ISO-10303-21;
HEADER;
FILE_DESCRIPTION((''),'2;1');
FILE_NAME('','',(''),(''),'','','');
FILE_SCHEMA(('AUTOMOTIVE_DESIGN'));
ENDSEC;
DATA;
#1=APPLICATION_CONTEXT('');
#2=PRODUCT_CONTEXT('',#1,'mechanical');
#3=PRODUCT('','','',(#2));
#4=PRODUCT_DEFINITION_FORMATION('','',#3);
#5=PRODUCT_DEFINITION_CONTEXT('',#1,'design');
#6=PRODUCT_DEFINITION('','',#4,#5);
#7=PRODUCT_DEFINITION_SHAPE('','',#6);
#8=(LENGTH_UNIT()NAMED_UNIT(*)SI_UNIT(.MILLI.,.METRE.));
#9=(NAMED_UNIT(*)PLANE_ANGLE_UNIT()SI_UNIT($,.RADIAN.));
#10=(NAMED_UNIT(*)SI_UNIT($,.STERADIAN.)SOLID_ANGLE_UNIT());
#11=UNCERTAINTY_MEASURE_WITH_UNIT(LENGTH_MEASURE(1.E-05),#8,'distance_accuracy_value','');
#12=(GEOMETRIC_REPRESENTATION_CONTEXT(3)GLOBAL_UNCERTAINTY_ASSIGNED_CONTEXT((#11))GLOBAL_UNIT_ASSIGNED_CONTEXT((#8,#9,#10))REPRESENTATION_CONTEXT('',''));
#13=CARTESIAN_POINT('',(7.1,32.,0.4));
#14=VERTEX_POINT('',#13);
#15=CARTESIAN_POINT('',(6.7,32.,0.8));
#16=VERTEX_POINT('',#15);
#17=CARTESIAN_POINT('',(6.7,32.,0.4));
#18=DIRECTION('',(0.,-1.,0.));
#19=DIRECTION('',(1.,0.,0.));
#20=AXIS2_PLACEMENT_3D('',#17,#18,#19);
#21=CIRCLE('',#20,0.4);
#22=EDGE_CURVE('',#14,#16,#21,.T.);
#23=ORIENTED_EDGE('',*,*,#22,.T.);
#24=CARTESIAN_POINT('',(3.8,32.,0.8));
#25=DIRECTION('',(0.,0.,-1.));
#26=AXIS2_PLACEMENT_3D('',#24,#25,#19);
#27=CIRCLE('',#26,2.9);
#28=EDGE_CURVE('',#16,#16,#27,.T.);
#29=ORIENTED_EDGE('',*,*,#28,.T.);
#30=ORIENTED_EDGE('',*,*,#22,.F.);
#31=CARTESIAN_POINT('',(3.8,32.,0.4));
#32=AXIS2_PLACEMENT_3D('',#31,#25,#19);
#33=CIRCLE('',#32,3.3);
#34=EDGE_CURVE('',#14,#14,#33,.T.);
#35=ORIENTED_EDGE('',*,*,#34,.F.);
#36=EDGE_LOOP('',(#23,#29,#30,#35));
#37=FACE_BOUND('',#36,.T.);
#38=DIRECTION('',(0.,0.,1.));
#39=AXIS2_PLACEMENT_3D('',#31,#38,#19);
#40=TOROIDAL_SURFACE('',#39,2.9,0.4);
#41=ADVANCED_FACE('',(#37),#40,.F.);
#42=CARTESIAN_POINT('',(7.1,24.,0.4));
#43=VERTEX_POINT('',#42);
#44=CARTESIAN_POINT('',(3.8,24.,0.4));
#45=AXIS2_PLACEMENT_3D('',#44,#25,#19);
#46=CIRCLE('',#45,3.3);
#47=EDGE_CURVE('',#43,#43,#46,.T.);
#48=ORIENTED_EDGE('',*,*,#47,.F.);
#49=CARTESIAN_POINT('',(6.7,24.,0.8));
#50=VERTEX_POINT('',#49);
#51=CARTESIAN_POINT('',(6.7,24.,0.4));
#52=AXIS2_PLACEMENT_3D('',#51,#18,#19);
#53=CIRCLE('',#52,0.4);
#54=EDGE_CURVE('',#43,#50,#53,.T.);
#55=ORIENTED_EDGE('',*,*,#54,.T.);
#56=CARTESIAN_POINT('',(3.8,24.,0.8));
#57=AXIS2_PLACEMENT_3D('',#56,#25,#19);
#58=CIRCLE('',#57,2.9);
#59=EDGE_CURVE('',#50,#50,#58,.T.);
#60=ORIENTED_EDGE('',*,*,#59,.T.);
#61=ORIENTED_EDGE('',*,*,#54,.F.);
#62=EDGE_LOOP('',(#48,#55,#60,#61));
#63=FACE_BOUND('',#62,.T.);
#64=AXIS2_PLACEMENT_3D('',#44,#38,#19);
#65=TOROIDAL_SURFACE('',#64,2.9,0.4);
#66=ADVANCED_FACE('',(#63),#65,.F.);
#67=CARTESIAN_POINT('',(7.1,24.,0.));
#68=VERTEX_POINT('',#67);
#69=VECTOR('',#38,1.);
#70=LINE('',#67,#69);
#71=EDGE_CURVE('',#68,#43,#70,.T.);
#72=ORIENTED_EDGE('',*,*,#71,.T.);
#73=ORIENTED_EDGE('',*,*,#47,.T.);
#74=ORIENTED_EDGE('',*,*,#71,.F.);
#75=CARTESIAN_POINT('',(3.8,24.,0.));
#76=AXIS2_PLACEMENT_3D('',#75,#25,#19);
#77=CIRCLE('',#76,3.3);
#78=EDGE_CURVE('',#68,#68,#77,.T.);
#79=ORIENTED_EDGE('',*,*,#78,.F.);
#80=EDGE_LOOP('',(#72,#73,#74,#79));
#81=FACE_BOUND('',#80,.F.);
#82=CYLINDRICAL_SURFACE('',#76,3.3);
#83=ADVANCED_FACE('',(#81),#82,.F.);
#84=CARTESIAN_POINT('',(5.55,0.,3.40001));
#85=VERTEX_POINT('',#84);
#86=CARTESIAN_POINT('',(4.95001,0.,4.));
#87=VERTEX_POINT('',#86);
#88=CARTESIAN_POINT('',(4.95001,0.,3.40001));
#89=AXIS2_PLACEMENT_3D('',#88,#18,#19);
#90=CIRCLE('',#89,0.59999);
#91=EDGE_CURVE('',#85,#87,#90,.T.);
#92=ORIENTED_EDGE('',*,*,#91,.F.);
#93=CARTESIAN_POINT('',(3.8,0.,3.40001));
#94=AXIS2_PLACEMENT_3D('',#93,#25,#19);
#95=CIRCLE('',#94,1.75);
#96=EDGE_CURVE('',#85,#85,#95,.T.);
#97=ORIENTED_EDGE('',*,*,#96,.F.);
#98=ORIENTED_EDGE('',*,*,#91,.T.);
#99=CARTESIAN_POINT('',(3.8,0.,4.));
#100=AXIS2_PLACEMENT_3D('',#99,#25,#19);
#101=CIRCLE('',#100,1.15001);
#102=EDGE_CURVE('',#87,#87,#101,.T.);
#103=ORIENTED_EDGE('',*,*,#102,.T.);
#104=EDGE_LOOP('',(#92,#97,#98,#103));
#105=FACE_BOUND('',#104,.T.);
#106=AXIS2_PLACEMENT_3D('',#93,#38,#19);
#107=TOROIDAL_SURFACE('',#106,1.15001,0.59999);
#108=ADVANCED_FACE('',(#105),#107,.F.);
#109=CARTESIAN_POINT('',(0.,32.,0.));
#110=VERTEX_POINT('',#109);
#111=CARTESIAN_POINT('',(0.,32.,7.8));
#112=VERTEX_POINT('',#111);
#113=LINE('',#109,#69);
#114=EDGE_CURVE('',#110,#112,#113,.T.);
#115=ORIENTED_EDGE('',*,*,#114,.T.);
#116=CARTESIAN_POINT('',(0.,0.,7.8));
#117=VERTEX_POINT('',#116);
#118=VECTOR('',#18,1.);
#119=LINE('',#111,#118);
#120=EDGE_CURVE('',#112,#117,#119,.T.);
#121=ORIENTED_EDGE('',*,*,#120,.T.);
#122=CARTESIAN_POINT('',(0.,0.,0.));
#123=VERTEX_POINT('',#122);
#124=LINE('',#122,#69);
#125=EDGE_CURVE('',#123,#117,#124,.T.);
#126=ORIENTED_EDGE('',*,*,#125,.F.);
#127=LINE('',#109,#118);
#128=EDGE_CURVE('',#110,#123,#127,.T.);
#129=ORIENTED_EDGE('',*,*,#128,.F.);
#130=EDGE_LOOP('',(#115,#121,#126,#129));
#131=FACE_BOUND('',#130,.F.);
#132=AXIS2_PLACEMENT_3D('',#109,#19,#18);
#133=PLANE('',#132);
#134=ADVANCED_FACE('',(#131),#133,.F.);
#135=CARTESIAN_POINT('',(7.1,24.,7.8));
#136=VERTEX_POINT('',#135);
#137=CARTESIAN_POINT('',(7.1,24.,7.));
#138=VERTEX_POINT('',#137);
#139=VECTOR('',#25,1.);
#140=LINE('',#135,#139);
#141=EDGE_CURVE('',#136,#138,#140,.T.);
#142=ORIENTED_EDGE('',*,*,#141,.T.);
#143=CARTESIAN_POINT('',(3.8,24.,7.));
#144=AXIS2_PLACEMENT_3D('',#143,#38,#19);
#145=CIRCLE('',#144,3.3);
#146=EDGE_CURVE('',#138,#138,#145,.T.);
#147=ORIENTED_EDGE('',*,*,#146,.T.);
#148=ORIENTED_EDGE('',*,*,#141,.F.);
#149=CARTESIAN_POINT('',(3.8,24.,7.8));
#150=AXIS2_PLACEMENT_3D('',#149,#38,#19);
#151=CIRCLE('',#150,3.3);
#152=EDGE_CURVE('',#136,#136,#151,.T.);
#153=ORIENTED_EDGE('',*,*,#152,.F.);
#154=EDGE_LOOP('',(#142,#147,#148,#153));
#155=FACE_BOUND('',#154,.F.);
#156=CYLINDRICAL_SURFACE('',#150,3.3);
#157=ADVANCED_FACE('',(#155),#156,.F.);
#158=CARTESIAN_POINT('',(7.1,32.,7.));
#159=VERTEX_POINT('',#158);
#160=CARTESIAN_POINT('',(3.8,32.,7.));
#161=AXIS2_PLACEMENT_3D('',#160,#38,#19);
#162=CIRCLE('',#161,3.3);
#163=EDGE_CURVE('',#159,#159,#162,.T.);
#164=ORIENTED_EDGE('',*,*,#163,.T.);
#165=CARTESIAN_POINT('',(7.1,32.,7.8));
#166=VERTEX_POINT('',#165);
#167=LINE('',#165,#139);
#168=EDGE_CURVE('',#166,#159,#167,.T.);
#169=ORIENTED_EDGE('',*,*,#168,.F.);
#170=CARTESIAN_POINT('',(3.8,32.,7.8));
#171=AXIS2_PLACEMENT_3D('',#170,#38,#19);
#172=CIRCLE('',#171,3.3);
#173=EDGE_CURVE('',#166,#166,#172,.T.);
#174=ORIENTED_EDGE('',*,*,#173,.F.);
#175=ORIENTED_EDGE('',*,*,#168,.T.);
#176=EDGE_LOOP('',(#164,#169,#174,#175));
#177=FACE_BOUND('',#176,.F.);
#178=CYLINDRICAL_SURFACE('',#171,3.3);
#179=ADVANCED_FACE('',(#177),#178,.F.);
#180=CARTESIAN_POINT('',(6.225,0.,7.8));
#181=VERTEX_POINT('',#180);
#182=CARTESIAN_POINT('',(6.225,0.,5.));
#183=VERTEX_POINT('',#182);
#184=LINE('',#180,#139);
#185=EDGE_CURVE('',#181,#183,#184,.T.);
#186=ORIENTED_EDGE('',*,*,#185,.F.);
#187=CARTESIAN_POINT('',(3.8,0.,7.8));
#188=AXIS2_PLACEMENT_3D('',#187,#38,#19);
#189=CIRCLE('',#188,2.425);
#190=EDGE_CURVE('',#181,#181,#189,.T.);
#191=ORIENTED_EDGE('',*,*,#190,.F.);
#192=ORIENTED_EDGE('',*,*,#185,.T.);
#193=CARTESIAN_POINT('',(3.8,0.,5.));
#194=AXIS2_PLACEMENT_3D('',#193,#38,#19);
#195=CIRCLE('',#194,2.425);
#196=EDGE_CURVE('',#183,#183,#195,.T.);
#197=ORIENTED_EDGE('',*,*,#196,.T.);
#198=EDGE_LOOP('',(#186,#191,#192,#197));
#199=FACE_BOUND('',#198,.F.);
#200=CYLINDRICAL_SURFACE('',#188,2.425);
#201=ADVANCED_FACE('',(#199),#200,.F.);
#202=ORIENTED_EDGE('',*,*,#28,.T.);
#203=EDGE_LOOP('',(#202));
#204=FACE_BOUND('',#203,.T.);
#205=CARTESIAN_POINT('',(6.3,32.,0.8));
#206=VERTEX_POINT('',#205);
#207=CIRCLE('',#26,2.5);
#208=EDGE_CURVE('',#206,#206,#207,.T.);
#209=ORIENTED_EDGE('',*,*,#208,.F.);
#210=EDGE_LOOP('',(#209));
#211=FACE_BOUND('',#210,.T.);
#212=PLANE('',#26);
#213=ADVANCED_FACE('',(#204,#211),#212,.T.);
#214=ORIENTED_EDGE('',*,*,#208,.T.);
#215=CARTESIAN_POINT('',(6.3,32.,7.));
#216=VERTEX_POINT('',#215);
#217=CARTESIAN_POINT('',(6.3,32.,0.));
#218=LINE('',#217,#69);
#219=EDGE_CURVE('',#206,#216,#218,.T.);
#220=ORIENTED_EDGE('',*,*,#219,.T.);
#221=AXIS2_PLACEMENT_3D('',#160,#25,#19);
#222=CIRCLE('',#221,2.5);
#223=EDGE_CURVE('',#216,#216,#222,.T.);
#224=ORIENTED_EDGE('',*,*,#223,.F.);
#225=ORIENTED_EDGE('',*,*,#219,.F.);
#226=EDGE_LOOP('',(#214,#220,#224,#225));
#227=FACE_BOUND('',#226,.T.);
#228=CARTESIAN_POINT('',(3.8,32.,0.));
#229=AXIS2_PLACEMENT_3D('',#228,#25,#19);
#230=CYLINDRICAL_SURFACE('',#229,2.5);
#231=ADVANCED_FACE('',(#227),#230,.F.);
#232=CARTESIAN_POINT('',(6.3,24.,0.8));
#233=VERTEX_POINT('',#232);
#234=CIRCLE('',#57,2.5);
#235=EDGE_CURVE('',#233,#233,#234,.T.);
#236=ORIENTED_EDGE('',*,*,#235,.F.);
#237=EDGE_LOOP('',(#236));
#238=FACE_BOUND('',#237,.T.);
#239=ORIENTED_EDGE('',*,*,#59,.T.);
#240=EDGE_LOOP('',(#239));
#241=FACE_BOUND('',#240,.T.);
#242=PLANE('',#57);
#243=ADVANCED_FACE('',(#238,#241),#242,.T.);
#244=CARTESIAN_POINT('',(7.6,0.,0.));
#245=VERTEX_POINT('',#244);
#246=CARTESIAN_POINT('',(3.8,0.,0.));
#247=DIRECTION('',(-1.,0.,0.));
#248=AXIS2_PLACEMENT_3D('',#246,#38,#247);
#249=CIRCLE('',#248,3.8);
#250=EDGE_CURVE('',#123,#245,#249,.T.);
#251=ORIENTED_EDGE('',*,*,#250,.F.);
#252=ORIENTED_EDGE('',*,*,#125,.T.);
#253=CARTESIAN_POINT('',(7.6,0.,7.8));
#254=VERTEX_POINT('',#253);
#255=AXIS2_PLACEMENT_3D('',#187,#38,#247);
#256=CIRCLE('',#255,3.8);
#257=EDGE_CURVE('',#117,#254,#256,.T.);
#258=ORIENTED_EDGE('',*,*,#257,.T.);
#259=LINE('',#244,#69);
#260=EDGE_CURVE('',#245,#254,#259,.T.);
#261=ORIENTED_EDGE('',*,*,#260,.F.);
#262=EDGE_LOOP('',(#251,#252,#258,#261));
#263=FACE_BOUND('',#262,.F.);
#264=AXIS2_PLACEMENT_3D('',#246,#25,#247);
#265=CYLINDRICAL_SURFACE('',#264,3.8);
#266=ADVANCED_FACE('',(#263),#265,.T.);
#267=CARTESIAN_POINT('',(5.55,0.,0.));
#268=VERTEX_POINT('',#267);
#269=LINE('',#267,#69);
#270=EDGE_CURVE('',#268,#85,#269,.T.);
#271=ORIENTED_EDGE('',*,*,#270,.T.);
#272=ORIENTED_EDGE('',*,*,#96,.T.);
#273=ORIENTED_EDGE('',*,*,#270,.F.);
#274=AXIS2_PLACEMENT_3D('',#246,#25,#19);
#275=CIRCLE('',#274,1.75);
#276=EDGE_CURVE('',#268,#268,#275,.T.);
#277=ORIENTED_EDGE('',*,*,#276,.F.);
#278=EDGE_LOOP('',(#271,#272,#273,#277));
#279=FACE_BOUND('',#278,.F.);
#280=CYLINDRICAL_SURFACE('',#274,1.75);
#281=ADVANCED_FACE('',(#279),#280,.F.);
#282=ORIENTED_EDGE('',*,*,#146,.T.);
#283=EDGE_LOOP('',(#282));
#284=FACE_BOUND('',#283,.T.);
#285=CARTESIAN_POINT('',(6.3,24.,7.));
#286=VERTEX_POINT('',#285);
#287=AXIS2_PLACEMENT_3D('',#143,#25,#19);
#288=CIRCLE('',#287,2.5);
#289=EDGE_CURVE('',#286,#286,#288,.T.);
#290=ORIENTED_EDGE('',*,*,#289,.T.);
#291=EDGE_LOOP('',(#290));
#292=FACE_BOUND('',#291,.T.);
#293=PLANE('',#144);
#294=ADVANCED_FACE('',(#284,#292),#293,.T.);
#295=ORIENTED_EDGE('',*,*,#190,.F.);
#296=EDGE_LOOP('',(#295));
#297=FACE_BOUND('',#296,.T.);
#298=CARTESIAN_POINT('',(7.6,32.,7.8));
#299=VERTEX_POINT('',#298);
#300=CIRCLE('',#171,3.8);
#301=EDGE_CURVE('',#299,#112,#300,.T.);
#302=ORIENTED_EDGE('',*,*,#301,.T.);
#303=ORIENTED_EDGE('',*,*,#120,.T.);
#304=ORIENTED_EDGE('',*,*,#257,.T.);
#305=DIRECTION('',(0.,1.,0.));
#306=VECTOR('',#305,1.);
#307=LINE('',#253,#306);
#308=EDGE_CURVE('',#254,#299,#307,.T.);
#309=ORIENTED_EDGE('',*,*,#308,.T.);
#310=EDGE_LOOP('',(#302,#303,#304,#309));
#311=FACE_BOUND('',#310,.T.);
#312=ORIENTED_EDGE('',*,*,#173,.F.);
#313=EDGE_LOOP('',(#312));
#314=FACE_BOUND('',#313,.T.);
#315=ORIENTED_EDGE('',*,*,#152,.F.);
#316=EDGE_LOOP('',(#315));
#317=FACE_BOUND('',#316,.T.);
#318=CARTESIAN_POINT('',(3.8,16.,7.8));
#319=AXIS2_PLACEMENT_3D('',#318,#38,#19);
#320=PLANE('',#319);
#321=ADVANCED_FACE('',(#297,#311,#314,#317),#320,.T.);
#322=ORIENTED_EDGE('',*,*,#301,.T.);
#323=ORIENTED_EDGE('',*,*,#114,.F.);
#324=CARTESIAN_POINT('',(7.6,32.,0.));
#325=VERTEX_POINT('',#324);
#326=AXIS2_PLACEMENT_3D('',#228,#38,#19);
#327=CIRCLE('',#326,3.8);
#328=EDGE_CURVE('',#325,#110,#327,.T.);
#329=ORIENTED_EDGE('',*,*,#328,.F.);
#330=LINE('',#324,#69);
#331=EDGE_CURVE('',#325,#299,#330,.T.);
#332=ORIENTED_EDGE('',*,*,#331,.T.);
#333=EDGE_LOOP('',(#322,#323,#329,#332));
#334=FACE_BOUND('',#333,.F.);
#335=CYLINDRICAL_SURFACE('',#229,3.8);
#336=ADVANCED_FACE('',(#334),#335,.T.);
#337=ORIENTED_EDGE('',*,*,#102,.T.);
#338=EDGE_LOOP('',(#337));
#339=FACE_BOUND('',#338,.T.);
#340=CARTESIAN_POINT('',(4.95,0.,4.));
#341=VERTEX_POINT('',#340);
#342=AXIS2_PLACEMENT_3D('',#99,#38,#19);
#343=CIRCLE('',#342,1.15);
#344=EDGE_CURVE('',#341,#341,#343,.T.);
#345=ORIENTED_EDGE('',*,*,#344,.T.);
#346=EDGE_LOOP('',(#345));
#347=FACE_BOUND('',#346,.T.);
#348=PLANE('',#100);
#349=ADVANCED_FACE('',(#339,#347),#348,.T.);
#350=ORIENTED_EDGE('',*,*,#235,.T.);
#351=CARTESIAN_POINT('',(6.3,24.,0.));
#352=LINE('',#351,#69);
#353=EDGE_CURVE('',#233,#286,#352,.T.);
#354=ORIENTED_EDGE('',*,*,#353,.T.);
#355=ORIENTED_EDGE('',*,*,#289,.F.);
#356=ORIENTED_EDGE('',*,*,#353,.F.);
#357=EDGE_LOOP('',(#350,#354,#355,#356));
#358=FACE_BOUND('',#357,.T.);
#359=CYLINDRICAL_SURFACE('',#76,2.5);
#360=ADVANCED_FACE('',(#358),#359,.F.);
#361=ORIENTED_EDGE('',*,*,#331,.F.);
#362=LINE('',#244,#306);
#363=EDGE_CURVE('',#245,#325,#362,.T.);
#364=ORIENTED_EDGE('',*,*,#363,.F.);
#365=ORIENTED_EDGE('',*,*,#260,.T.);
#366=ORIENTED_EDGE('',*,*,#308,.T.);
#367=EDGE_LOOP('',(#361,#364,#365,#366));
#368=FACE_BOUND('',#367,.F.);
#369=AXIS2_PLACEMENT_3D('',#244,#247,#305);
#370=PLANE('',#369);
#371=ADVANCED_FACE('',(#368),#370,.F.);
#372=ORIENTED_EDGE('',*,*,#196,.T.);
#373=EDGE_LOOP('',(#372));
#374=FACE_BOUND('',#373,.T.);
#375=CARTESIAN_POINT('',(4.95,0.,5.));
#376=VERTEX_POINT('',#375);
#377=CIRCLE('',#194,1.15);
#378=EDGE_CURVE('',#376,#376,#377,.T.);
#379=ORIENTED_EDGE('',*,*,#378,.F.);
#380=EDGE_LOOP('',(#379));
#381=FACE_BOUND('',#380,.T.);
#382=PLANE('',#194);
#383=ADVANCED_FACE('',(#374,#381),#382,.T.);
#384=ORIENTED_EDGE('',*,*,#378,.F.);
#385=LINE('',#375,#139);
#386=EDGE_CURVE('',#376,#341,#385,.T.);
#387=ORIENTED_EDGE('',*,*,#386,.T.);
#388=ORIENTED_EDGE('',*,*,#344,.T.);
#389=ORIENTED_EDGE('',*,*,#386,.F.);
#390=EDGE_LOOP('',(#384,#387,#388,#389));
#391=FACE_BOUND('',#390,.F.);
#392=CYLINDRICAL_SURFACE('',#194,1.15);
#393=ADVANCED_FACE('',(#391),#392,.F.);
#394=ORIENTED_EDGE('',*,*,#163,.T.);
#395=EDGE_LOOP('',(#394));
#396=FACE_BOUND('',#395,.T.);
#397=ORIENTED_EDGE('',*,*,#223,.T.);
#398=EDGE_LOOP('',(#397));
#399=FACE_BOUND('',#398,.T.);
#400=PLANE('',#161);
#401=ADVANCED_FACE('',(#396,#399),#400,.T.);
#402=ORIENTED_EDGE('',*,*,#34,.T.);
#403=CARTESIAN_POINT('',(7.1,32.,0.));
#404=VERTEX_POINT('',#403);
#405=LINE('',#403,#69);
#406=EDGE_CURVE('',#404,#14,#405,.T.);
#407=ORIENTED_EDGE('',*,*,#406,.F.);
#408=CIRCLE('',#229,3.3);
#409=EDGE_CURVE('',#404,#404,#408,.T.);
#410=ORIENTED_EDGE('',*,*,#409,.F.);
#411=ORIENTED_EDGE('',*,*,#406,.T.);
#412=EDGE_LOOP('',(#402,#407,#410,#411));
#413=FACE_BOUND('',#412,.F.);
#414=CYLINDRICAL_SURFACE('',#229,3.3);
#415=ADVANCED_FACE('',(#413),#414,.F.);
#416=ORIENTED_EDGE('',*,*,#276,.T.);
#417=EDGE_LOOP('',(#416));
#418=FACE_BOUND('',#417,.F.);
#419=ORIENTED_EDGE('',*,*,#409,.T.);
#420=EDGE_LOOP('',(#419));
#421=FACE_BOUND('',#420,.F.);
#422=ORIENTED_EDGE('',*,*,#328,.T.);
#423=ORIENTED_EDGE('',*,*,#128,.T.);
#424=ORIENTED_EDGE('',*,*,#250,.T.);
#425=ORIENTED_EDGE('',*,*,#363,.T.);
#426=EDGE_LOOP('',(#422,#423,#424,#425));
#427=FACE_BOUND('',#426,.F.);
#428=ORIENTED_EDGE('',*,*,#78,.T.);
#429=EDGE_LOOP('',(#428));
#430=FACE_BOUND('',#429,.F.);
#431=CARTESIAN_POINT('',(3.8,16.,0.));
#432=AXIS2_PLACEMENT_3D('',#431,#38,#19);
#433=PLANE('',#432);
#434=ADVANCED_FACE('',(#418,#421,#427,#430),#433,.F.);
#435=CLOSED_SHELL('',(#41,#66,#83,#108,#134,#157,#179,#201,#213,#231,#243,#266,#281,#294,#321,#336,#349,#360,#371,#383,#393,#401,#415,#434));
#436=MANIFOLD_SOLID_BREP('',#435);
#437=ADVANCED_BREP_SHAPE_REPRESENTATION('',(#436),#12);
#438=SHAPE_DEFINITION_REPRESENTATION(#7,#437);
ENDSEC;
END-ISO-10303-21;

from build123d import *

# Parameters (mm, degrees)
F0_R      = 2.5
F1_DEPTH  = 7.8
F2_R      = 3.3
F3_DEPTH  = 0.8
F4_R      = 3.3
F5_DEPTH  = 0.8
F6_R      = 2.425
F7_DEPTH  = 2.8
F8_R      = 1.75
F9_DEPTH  = 4
F10_R     = 1.15
F11_DEPTH = 5.001
F12_R     = 0.59999
F13_R     = 0.4


# Not quite as in the source:
# - a fillet or chamfer is up to 0.001 mm smaller than in the source, because OpenCascade refuses the exact size


with BuildPart() as f1:
    # F0 (on Top) → F1 (new body)
    with BuildSketch(Plane.XY):
        with BuildLine():
            Line((0, 32), (0, 0))
            ThreePointArc((0, 0), (3.8, -3.8), (7.6, 0))
            Line((7.6, 0), (7.6, 32))
            ThreePointArc((7.6, 32), (3.8, 35.8), (0, 32))
        make_face()
        with Locations((3.8, 24)):
            Circle(F0_R, mode=Mode.SUBTRACT)
        with Locations((3.8, 32)):
            Circle(F0_R, mode=Mode.SUBTRACT)
    extrude(amount=F1_DEPTH)

    # F2 (on face) → F3 (cut)
    with BuildSketch(Plane.XY.offset(7.8)):
        with Locations((3.8, 32)):
            Circle(F2_R)
        with Locations((3.8, 24)):
            Circle(F2_R)
    extrude(amount=-F3_DEPTH, mode=Mode.SUBTRACT)

    # F4 (on face) → F5 (cut)
    with BuildSketch(Plane(origin=(0, 0, 0), x_dir=(1, 0, 0), z_dir=(0, 0, -1))):
        with Locations((3.8, -24)):
            Circle(F4_R)
        with Locations((3.8, -32)):
            Circle(F4_R)
    extrude(amount=-F5_DEPTH, mode=Mode.SUBTRACT)

    # F6 (on face) → F7 (cut)
    with BuildSketch(Plane.XY.offset(7.8)):
        with Locations((3.8, 0)):
            Circle(F6_R)
    extrude(amount=-F7_DEPTH, mode=Mode.SUBTRACT)

    # F8 (on face) → F9 (cut)
    with BuildSketch(Plane(origin=(0, 0, 0), x_dir=(1, 0, 0), z_dir=(0, 0, -1))):
        with Locations((3.8, 0)):
            Circle(F8_R)
    extrude(amount=-F9_DEPTH, mode=Mode.SUBTRACT)

    # F10 (on face) → F11 (cut, through all)
    with BuildSketch(Plane.XY.offset(5)):
        with Locations((3.8, 0)):
            Circle(F10_R)
    extrude(amount=-F11_DEPTH, mode=Mode.SUBTRACT)

    # F12 (radius 0.6 in the source; OpenCascade refuses exactly that, so slightly less here)
    f12_edges = [f1.edges().sort_by_distance(p)[0] for p in [
        (2.05, 0, 4),
    ]]
    fillet(f12_edges, radius=F12_R)

    # F13
    f13_edges = [f1.edges().sort_by_distance(p)[0] for p in [
        (0.5, 24, 0.8),
        (0.5, 32, 0.8),
    ]]
    fillet(f13_edges, radius=F13_R)


solid = f1.part
